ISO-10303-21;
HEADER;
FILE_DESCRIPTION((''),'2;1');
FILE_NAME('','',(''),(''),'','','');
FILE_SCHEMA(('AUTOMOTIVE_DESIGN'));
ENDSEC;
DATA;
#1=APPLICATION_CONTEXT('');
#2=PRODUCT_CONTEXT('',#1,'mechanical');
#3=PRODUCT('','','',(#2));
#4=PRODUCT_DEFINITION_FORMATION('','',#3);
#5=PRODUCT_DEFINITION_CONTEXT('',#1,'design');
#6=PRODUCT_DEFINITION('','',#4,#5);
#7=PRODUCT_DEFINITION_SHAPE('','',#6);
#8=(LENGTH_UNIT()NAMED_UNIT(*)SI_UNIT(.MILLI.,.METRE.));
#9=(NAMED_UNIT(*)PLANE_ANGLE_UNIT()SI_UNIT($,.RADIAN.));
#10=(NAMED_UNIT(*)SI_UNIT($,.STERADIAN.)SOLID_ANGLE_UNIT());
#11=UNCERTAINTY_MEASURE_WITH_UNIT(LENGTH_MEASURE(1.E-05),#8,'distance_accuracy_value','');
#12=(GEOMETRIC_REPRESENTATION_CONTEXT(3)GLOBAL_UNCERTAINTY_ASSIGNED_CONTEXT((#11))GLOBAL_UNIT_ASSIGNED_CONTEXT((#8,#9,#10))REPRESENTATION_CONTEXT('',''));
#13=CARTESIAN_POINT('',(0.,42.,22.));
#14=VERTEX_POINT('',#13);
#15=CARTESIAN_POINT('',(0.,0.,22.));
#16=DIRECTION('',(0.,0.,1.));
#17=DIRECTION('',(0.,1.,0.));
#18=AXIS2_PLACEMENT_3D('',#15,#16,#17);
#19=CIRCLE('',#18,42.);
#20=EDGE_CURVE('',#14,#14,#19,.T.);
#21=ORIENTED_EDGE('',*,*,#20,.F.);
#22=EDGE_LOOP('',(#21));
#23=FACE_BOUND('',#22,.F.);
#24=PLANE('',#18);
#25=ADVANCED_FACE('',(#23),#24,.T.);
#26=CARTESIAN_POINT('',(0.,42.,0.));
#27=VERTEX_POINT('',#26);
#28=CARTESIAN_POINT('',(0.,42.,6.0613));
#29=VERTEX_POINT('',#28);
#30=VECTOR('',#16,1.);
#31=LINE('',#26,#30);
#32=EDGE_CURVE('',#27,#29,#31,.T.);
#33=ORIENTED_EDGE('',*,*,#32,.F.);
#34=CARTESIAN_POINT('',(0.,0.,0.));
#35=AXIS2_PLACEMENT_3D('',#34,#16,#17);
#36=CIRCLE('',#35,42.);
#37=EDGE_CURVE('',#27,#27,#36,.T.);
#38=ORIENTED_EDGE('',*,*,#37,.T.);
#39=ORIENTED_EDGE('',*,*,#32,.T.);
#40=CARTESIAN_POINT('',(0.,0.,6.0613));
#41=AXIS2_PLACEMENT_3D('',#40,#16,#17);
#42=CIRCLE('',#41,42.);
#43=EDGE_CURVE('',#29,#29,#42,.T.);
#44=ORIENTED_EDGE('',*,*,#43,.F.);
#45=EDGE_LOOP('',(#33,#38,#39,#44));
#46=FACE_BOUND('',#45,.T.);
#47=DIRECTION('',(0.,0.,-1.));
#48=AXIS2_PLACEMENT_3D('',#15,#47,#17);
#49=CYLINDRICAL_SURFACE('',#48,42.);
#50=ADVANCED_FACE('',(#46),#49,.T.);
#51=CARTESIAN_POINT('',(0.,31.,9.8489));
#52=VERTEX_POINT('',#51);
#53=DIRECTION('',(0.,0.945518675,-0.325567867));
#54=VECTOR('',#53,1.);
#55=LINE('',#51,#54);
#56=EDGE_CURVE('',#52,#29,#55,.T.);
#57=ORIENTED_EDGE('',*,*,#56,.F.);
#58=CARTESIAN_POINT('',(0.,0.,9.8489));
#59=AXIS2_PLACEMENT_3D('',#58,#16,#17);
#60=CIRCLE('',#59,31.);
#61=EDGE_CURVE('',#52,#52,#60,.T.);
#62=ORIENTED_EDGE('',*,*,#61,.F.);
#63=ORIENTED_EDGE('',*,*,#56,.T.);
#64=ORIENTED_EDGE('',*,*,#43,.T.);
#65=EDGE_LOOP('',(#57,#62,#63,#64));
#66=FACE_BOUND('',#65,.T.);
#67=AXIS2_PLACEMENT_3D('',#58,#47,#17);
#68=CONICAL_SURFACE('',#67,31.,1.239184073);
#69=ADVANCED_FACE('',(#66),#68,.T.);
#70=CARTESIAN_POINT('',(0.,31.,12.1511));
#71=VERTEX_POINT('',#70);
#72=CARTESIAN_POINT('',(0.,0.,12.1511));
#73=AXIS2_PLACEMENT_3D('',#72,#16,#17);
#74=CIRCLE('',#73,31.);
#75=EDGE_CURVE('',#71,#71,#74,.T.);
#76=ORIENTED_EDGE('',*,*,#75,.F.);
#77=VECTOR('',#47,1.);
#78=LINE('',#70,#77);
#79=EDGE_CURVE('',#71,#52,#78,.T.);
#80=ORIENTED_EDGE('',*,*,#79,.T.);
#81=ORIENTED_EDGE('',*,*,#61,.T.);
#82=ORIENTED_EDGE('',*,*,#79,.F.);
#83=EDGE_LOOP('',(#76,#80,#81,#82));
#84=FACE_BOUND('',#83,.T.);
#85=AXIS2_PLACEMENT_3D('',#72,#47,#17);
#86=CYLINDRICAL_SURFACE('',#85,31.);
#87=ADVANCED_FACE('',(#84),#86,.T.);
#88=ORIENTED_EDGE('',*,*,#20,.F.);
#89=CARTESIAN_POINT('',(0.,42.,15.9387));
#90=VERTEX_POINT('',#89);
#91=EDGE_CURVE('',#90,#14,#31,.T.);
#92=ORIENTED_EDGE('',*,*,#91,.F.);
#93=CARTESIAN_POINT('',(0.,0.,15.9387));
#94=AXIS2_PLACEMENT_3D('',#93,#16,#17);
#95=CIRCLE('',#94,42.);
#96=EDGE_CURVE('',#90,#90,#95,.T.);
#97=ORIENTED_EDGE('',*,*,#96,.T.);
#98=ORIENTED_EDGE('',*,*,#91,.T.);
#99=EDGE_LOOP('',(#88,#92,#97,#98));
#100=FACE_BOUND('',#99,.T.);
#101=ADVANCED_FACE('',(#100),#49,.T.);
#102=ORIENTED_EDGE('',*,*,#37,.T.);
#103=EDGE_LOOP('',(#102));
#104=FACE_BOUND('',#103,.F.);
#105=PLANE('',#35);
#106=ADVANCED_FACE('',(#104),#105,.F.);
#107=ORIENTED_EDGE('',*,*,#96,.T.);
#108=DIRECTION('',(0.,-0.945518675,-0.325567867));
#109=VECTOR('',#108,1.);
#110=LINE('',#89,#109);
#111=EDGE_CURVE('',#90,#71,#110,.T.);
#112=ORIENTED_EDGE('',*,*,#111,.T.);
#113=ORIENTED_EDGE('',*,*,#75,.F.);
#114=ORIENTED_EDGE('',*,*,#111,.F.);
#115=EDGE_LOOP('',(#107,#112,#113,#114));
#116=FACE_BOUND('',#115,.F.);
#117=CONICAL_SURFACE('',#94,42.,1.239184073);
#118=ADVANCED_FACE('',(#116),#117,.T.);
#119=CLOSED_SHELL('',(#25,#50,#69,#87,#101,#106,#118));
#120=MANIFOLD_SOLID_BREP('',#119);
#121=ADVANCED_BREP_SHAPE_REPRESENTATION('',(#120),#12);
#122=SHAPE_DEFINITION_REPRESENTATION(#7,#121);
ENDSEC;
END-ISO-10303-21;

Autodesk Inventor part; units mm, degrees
ref_plane "YZ Plane" through (0, 0, 0) normal (1, 0, 0) x (0, 1, 0)
ref_plane "XZ Plane" through (0, 0, 0) normal (0, 1, 0) x (-1, 0, 0)
sketch "Esquisse principale" plane through (0, 0, 0) normal (1, 0, 0) x (0, 1, 0)
  line L0 (0, 22) -> (42, 22)
  line L1 (42, 22) -> (42, 15.9387)
  line L2 (42, 15.9387) -> (31, 12.1511)
  line L3 (31, 12.1511) -> (31, 9.8489)
  line L4 (31, 9.8489) -> (42, 6.0613)
  line L5 (42, 6.0613) -> (42, 0)
  line L6 (42, 0) -> (0, 0)
  line L7 (40, 15.25) -> (40, 6.75) construction
  line L8 (31, 11) -> (40, 11) construction
  line L9 (42, 15.9387) -> (42, 6.0613)
  line L10 (0, -3.2) -> (0, 19.2) projected
  line L11 (0, 0) -> (0, 22)
  dimension "d0" = 8.5
  dimension "d1" = 38
  dimension "d2" = 2
  dimension "d6" = 22
  dimension "d21" = 80
  dimension "d25" = 11
  dimension "d27" = 11
ref_plane "Plan de courroie" through (0, 31, 11) normal (0, 0, 1) x (1, 0, 0)
revolve "Corps" add sketch "Esquisse principale" angle 360 about axis through (0, 0, -10) along (0, 0, 1)
revolve "Bord" cut sketch "Esquisse principale" angle 360 about axis through (0, 0, -10) along (0, 0, 1) contours L9 L4 L3 L2
fillet "Congé externe" [suppressed]
fillet "Congé interne" [suppressed]
pattern_of_one "Réseau de bords"
equation "\"d0\" = da_Bw"
equation "\"d1\" = da_Alfa"
equation "\"d2\" = da_c"
equation "\"d21\" = da_Dw"
equation "\"d25\" = da_Hd"
equation "\"d27\" = da_Se"
equation "\"da_r1\" = 0"
equation "\"da_r2\" = 0"
equation "\"d18\" = da_Sg"
equation "\"d5\" = da_Se"
equation "\"da_Bw\" = 8.5"
equation "\"da_Alfa\" = 38deg"
equation "\"da_c\" = 2"
equation "\"da_Dw\" = 80"
equation "\"da_Hd\" = 11"
equation "\"da_Se\" = 11"
equation "\"da_Sg\" = 12"
properties part number "Poulie à gorge3" material "Steel"
